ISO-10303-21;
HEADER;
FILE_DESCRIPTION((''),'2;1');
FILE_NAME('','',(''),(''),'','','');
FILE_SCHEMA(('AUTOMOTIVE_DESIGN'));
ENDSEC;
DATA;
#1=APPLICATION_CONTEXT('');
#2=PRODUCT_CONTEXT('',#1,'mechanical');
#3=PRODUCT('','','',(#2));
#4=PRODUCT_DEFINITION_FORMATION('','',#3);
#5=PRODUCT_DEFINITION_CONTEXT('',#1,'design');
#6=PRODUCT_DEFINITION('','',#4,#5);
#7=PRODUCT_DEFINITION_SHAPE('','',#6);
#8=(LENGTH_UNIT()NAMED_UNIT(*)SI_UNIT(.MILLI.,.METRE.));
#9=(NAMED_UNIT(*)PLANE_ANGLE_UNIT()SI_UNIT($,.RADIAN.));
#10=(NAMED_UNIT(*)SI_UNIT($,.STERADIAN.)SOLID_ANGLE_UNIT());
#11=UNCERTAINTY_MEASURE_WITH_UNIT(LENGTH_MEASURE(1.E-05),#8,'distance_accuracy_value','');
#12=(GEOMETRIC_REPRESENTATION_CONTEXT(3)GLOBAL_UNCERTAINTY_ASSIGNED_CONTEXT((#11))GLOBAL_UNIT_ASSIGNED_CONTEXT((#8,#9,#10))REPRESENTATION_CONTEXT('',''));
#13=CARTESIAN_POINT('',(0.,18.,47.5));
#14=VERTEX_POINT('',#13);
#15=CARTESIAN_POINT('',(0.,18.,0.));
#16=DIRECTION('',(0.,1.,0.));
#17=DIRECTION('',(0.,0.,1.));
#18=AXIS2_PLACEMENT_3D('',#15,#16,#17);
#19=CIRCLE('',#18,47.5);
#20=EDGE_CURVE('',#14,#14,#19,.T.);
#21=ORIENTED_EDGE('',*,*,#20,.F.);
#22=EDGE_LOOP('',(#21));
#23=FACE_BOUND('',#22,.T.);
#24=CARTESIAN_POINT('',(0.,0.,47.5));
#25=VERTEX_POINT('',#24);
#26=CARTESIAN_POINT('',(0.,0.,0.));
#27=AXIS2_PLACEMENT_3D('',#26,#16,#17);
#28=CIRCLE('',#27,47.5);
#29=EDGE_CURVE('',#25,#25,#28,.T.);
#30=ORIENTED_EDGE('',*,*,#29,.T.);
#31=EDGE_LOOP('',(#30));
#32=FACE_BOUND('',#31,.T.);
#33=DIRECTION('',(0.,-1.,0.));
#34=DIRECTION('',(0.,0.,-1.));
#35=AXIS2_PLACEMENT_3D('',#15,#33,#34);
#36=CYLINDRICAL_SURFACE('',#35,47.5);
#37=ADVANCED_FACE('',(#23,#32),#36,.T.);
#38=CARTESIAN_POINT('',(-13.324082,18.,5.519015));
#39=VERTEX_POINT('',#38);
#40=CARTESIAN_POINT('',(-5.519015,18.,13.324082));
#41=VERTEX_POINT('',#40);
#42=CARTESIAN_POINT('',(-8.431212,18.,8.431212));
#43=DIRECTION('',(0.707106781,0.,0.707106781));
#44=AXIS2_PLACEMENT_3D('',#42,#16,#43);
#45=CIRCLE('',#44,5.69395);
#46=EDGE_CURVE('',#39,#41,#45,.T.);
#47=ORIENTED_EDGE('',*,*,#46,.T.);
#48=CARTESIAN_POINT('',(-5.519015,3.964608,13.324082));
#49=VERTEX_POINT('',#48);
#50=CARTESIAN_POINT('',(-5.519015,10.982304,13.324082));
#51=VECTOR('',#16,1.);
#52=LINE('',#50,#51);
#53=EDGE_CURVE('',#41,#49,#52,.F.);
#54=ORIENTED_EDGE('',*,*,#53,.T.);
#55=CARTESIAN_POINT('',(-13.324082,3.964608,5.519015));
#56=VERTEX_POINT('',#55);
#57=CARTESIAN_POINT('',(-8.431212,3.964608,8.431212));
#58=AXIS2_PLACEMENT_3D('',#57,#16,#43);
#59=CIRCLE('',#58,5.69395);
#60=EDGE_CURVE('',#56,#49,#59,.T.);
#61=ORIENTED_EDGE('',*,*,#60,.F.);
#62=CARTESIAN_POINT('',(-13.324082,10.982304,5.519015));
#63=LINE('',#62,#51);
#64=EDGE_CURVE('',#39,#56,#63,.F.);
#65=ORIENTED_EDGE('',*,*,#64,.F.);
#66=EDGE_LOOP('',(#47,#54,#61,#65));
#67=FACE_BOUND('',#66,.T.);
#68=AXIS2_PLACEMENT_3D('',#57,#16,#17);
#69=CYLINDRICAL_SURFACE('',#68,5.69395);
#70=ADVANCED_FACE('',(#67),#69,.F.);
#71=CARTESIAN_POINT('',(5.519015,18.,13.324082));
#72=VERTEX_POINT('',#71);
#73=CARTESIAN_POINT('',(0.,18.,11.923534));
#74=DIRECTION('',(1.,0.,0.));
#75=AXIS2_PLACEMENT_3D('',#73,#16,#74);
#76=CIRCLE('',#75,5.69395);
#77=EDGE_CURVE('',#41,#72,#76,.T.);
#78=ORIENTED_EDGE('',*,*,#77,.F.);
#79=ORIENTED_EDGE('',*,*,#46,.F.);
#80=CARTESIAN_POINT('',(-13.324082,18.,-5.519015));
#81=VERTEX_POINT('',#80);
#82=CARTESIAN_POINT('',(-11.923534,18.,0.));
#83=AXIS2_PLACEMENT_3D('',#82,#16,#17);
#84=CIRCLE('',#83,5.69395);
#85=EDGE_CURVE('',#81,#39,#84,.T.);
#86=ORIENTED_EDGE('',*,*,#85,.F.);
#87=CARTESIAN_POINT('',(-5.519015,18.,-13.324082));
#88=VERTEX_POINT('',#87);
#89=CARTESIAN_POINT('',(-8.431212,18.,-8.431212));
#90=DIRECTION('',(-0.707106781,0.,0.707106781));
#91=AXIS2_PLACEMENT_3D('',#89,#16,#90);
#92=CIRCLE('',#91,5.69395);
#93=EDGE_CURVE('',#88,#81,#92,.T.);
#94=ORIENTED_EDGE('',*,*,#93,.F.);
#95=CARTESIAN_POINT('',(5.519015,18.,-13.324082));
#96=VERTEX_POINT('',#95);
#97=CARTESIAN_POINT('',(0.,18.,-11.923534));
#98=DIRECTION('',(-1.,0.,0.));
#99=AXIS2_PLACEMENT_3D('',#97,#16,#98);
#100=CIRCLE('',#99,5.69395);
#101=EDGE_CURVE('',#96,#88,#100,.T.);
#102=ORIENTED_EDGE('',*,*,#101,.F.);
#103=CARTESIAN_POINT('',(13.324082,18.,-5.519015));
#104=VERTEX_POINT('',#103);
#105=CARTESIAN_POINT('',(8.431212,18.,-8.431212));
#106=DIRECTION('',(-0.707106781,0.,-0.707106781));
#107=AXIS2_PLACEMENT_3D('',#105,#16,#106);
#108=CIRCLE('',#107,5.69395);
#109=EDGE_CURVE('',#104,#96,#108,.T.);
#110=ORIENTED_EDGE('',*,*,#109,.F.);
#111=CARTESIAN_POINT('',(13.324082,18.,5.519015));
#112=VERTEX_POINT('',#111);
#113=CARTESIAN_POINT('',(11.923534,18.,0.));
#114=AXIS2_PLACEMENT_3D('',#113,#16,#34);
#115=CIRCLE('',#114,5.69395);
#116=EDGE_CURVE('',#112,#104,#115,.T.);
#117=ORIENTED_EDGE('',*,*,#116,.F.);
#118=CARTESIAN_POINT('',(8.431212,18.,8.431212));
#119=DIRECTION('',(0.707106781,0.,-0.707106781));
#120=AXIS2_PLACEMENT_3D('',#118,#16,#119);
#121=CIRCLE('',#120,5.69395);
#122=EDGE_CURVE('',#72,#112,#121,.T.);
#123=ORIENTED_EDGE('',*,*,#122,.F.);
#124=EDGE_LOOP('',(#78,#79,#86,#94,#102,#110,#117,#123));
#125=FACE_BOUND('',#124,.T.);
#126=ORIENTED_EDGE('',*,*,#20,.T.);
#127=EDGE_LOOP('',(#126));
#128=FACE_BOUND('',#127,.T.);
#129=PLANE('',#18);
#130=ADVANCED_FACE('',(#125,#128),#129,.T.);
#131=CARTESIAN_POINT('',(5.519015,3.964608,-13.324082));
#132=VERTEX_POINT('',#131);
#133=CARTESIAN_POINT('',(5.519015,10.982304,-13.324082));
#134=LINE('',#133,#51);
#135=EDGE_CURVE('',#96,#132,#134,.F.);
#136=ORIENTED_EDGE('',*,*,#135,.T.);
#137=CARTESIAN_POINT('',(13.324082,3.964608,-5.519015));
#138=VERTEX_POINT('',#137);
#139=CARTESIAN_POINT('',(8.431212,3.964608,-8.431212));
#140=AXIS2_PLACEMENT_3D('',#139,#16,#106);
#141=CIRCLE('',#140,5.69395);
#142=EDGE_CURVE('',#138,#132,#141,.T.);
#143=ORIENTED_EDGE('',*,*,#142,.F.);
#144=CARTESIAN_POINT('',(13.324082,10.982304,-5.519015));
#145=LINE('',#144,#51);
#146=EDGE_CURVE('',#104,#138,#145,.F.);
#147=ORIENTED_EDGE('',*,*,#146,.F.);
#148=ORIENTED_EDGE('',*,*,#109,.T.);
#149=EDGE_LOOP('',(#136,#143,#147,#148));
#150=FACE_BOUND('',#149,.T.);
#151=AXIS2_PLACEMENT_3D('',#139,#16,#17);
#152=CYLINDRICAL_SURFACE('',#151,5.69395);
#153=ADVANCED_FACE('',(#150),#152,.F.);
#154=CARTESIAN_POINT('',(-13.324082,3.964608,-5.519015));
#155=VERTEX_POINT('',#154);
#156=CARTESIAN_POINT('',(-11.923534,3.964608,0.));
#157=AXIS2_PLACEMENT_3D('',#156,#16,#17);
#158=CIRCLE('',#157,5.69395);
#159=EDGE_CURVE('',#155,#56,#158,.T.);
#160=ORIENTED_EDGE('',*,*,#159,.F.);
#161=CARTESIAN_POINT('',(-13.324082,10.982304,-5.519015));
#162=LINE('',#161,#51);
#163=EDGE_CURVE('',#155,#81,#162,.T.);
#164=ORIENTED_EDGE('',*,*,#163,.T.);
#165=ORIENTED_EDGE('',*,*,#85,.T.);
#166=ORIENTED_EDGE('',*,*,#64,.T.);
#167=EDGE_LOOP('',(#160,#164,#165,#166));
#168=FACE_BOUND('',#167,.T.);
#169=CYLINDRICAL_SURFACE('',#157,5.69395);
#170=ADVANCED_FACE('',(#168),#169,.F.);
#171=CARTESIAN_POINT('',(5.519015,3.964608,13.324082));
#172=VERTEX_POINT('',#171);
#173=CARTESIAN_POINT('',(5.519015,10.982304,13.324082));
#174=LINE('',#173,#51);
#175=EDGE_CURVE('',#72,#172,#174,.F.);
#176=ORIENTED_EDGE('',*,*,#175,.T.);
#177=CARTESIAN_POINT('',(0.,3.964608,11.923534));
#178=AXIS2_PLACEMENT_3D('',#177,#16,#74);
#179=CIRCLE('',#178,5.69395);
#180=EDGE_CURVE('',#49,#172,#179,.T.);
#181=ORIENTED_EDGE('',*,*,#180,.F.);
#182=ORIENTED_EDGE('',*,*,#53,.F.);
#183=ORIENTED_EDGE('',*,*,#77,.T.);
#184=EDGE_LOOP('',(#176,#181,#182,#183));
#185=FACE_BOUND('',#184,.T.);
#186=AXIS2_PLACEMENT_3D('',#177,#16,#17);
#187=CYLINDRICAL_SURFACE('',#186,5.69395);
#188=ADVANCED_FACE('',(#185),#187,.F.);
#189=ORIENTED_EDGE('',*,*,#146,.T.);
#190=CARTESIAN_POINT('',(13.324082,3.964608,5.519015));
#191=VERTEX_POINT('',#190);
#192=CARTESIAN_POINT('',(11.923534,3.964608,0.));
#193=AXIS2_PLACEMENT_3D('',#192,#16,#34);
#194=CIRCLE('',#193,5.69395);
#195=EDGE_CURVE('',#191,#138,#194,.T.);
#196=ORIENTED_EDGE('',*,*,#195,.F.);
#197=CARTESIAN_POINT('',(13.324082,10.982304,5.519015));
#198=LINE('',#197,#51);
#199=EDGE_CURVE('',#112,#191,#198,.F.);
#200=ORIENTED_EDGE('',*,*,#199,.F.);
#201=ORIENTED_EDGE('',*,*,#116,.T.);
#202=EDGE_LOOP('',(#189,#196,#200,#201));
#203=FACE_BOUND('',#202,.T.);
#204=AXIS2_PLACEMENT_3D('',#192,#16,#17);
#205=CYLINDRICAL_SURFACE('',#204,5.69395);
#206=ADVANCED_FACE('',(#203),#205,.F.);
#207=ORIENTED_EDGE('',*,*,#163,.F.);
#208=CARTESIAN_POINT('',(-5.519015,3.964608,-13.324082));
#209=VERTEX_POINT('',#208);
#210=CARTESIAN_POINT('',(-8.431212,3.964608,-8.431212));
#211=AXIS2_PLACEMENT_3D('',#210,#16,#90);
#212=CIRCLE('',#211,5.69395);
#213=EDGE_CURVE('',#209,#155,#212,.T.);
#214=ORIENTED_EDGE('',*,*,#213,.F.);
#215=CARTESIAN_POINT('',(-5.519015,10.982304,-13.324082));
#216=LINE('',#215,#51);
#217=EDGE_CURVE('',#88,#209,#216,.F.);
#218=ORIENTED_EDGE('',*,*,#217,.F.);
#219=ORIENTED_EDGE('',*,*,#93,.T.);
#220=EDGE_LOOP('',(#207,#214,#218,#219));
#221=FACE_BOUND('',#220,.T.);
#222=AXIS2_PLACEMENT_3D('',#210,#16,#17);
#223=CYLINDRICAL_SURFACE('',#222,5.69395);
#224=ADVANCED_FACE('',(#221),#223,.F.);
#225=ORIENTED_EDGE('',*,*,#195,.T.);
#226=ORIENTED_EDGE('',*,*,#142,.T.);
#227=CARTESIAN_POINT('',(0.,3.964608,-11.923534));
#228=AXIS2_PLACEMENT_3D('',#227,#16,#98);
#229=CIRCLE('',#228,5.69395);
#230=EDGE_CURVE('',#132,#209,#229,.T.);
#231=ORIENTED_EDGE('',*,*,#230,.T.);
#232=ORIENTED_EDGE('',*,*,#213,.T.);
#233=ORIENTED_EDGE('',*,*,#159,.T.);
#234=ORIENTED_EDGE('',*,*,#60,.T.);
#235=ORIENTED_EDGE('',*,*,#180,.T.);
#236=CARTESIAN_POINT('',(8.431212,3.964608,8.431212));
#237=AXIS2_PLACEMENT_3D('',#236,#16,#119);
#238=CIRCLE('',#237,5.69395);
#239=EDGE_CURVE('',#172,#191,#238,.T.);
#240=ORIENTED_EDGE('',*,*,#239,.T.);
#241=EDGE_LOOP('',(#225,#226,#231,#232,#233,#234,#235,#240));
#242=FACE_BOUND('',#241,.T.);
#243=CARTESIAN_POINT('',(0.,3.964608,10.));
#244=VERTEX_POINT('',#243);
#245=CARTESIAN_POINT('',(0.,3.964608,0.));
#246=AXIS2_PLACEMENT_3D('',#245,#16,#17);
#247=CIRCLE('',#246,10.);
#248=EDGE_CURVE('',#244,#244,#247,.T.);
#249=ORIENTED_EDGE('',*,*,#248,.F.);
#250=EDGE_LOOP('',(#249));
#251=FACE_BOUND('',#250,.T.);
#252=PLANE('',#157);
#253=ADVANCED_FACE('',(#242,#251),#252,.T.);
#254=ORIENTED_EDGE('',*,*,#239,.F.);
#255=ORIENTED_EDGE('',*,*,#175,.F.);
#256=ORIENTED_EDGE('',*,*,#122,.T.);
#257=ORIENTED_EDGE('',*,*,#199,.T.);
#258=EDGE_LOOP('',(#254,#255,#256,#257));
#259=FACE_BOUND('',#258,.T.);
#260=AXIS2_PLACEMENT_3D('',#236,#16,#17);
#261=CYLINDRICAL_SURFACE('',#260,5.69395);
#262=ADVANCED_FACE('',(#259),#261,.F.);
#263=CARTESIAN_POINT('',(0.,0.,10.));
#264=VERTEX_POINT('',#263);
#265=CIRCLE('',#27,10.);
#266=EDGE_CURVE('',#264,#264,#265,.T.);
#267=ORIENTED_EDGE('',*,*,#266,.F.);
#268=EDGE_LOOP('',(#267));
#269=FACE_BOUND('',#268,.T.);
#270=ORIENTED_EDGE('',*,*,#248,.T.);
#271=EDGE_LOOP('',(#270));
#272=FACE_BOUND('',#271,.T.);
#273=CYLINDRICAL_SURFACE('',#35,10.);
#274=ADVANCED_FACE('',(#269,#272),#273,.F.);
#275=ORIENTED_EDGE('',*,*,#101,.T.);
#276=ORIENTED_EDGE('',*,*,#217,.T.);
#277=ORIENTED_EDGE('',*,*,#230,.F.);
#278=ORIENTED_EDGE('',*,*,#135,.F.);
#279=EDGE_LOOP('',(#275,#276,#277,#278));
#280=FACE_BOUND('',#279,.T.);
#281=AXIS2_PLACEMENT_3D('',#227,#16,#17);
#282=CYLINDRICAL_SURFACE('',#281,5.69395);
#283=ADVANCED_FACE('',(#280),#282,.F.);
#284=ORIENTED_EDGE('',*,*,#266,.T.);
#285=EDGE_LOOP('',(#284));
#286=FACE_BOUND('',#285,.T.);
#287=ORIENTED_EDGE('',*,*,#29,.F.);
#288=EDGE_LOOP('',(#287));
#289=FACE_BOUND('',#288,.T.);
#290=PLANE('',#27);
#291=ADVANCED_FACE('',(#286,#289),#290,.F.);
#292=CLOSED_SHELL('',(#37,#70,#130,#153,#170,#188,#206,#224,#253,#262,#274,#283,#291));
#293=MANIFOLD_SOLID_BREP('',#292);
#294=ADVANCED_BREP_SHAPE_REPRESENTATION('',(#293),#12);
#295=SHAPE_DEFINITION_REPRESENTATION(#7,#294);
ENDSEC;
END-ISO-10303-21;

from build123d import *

# Parameters (mm, degrees)
SKETCH1_R           = 47.5
BOSS_EXTRUDE1_DEPTH = 18
SKETCH2_R           = 10
CUT_EXTRUDE1_DEPTH  = 70.544949493
SKETCH3_R           = 5.6939499
CUT_EXTRUDE2_DEPTH  = 14.035391581
CIRPATTERN1_COUNT   = 8


with BuildPart() as part:
    # Sketch1 → Boss-Extrude1 (new body)
    with BuildSketch(Plane(origin=(0, 0, 0), x_dir=(1, 0, 0), z_dir=(0, 1, 0))):
        Circle(SKETCH1_R)
    extrude(amount=BOSS_EXTRUDE1_DEPTH)

    # Sketch2 → Cut-Extrude1 (cut, through all)
    with BuildSketch(Plane(origin=(0, 0, 0), x_dir=(1, 0, 0), z_dir=(0, 1, 0))):
        Circle(SKETCH2_R)
    extrude(amount=CUT_EXTRUDE1_DEPTH, mode=Mode.SUBTRACT)

    # Sketch3 → Cut-Extrude2 (cut)
    with BuildSketch(Plane(origin=(0, 18, 0), x_dir=(1, 0, 0), z_dir=(0, 1, 0))):
        with Locations((-11.92353418, 0)):
            Circle(SKETCH3_R)
    cut_extrude2 = extrude(amount=-CUT_EXTRUDE2_DEPTH, mode=Mode.SUBTRACT)

    # CirPattern1: Cut-Extrude2 ×8 about axis
    cirpattern1_axis = Axis((0, 0, 0), (0, 1, 0))
    for i in range(1, CIRPATTERN1_COUNT):
        add(cut_extrude2.rotate(cirpattern1_axis, i * 360 / CIRPATTERN1_COUNT), mode=Mode.SUBTRACT)


solid = part.part
